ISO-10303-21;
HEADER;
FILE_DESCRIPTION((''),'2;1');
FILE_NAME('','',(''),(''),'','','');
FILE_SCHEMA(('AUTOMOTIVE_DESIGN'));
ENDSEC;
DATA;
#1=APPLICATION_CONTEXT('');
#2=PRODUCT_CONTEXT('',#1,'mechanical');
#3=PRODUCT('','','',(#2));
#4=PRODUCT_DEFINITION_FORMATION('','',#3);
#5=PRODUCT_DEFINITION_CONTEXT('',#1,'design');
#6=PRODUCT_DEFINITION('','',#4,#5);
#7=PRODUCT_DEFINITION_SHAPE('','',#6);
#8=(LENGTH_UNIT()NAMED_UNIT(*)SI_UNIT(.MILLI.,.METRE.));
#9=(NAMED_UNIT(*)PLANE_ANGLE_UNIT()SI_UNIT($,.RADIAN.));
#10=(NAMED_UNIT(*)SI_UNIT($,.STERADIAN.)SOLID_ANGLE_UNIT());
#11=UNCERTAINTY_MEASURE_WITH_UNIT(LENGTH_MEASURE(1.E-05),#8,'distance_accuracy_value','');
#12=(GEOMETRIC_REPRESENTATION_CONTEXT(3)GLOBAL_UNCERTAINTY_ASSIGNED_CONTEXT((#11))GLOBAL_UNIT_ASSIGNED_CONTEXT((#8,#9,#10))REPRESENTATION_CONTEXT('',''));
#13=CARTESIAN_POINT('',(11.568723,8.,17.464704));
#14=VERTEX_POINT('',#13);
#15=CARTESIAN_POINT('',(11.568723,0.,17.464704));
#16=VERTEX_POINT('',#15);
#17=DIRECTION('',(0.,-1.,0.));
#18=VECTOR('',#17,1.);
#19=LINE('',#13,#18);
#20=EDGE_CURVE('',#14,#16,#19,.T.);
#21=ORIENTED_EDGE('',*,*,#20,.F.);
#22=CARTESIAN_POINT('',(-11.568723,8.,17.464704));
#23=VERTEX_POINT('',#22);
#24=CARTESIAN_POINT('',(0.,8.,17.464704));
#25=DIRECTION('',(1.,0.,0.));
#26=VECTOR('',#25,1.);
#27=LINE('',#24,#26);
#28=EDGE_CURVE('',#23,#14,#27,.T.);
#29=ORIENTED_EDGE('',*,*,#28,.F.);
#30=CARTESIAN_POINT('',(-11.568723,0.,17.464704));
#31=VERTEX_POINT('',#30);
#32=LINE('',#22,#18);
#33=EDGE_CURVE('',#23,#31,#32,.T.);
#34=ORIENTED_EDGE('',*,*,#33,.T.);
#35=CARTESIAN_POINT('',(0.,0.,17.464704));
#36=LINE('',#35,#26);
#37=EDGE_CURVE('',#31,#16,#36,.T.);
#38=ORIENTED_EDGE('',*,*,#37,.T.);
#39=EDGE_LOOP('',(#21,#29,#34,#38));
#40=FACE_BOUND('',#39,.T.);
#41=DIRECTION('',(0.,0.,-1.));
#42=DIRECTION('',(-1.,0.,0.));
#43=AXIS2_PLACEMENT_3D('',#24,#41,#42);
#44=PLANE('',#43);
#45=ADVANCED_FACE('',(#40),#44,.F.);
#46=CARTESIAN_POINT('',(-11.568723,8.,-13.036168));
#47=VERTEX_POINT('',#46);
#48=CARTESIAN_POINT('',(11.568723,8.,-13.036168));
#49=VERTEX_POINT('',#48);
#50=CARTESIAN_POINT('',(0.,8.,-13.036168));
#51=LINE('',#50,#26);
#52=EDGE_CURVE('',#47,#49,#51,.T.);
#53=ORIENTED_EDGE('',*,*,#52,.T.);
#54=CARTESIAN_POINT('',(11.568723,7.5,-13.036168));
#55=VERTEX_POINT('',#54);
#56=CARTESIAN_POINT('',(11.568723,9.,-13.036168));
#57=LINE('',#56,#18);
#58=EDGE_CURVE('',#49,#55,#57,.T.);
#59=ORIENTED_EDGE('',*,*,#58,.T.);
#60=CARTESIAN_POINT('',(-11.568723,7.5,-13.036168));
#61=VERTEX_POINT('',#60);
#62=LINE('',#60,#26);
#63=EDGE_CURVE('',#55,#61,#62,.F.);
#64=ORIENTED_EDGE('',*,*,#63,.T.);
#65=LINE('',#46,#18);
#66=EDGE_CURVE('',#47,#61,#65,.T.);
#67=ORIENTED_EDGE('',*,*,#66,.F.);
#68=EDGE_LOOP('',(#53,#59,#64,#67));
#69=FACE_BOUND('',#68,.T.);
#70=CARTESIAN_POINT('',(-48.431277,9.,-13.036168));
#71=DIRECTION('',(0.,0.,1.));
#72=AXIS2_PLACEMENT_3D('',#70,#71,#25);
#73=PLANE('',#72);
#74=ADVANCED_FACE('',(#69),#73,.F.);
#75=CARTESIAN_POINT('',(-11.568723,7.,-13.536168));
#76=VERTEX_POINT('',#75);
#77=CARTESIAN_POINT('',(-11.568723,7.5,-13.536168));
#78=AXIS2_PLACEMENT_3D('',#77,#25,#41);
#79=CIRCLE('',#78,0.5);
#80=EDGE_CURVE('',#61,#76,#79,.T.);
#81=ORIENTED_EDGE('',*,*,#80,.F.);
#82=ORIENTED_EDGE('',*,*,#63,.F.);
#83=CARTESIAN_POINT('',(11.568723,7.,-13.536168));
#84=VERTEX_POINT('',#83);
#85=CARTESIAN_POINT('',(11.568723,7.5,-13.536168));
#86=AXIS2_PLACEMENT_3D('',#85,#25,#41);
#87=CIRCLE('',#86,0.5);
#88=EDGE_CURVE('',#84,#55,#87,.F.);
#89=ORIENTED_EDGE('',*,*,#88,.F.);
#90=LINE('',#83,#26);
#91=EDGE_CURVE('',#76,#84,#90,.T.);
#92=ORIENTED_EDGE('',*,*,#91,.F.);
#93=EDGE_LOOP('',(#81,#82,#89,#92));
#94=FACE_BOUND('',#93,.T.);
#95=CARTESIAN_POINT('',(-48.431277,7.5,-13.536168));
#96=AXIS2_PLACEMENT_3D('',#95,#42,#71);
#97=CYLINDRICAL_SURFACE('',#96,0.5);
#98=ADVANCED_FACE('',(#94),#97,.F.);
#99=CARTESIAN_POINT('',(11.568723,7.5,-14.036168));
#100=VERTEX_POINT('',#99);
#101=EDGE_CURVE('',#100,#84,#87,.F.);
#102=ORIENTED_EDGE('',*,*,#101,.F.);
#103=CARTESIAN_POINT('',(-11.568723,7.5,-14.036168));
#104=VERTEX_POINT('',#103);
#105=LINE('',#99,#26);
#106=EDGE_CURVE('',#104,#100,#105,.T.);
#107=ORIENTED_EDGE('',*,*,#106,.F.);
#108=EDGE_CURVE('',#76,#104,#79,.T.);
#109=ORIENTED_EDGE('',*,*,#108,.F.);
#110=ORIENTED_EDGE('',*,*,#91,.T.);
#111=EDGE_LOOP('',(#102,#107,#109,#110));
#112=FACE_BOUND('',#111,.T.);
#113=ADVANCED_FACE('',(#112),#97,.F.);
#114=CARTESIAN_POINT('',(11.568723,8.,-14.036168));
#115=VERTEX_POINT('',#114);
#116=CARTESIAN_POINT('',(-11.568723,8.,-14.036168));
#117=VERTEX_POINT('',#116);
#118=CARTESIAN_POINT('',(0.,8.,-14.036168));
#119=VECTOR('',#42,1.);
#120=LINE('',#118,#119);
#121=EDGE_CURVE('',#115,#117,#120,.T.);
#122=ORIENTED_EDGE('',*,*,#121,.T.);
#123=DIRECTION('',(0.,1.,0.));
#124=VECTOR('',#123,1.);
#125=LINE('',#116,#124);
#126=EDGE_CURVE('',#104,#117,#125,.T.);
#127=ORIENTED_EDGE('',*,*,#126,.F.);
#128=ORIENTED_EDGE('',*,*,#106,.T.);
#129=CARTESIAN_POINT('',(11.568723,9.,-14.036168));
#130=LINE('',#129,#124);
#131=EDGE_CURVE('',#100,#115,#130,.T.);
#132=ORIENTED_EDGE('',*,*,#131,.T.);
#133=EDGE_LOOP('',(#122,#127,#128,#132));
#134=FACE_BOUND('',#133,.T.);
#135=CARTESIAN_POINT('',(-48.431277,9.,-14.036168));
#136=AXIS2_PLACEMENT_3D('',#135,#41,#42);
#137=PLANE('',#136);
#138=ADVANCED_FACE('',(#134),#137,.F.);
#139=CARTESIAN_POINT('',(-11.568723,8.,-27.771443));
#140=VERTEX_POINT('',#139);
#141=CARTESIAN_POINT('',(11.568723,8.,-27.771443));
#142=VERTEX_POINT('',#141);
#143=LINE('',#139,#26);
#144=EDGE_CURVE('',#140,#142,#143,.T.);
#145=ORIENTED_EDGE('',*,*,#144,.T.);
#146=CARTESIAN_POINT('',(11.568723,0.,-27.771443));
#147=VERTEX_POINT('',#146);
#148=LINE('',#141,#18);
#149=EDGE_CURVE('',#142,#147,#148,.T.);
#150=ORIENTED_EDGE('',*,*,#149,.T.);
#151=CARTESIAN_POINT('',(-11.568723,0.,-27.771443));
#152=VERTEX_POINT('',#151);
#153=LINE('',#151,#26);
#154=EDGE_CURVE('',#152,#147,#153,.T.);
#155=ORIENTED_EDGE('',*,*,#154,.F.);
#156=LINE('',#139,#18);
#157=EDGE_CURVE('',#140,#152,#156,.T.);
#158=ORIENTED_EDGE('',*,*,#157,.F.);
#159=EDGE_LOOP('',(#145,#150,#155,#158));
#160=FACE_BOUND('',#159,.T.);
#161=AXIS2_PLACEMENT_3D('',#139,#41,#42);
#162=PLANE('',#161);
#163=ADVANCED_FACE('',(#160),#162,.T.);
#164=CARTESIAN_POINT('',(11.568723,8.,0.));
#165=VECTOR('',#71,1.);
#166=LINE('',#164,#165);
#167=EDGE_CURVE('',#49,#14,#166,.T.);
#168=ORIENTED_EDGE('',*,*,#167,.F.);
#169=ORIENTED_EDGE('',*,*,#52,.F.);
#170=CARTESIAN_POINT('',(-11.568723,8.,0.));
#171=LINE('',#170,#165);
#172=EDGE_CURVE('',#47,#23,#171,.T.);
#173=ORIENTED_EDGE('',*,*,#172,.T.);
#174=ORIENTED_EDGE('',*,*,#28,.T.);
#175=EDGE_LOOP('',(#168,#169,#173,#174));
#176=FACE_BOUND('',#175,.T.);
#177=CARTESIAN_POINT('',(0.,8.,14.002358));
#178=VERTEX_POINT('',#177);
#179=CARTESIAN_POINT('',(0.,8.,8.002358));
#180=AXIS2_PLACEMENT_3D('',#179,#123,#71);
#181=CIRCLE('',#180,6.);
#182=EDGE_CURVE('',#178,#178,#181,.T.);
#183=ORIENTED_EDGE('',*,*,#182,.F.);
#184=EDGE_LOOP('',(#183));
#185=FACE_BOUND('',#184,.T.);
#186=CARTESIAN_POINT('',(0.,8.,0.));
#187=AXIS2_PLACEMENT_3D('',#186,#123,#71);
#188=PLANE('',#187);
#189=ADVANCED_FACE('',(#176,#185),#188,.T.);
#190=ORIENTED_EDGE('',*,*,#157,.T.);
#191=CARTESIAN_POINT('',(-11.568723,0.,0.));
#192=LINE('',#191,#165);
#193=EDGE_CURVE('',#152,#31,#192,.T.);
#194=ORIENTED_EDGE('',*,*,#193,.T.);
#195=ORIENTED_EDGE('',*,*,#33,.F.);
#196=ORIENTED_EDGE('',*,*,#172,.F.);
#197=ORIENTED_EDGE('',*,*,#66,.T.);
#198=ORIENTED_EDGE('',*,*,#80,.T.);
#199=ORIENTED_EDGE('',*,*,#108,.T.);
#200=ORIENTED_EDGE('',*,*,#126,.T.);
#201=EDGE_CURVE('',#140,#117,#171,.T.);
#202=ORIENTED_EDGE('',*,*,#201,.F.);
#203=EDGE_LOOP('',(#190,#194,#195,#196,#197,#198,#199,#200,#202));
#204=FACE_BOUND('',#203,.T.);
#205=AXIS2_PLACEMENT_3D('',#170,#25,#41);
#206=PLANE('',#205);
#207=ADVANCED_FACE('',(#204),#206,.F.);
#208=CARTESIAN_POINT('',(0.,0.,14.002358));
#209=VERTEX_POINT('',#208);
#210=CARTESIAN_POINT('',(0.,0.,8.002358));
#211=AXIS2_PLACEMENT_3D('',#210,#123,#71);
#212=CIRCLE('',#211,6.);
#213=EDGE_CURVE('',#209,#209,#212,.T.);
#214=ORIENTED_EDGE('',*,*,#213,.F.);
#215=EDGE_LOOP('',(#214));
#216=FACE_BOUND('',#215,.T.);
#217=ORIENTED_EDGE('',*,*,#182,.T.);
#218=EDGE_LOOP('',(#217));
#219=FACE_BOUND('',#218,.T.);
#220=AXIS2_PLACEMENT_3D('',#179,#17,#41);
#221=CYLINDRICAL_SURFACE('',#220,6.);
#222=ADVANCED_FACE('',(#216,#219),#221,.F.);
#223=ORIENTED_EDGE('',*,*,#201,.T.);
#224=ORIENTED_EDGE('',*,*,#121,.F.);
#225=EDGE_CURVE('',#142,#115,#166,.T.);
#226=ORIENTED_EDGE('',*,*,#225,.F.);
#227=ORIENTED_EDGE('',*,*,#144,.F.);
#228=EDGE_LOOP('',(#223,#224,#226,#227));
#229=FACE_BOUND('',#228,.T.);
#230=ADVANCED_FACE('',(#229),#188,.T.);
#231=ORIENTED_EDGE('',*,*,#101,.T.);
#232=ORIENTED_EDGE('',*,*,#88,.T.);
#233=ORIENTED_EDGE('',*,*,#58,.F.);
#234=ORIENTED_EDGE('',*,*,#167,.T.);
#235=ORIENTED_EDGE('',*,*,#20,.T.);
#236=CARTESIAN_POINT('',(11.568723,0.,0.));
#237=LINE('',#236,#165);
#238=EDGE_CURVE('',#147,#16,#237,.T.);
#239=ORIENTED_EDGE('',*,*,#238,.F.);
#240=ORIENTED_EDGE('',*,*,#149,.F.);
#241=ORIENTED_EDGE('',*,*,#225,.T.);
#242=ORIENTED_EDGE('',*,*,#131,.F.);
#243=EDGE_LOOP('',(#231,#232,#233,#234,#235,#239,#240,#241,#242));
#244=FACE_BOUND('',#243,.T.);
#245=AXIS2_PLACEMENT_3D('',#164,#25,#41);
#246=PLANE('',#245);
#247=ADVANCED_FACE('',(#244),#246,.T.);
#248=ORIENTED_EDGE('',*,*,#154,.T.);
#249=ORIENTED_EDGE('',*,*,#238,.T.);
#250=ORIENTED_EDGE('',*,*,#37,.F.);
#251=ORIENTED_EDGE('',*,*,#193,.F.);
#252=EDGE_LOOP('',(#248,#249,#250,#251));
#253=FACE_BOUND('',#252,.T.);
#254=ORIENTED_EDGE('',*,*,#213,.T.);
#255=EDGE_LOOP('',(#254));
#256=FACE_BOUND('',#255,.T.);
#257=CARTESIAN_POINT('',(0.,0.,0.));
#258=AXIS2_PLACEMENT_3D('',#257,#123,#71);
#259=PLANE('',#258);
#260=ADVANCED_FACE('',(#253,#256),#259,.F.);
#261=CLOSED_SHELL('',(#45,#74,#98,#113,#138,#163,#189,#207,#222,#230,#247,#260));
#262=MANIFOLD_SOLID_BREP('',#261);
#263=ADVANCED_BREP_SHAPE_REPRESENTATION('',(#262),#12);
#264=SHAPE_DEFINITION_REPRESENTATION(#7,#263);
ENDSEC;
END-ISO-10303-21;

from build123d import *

# Parameters (mm, degrees)
BOSS_EXTRUDE1_DEPTH = 8
SKETCH2_W           = 23.137445614
SKETCH2_H           = 10.306738945
BOSS_EXTRUDE2_DEPTH = 8
SKETCH4_W           = 1
SKETCH4_H           = 2
CUT_EXTRUDE1_DEPTH  = 60
FILLET1_R           = 0.5


with BuildPart() as part:
    # Sketch1 → Boss-Extrude1 (new body)
    with BuildSketch(Plane(origin=(0, 0, 0), x_dir=(1, 0, 0), z_dir=(0, 1, 0))):
        with BuildLine():
            Line((11.568722807, -17.464704369), (11.568722807, 17.464704369))
            Line((11.568722807, 17.464704369), (0, 17.464704369))
            Line((0, 17.464704369), (0, -2.002357687))
            ThreePointArc((0, -2.002357687), (4.242640687, -3.759717), (6, -8.002357687))
            ThreePointArc((6, -8.002357687), (4.242640687, -12.244998375), (0, -14.002357687))
            Line((0, -14.002357687), (0, -17.464704369))
            Line((0, -17.464704369), (11.568722807, -17.464704369))
        make_face()
        with BuildLine():
            Line((0, -2.002357687), (0, 17.464704369))
            Line((0, 17.464704369), (-11.568722807, 17.464704369))
            Line((-11.568722807, 17.464704369), (-11.568722807, -17.464704369))
            Line((-11.568722807, -17.464704369), (0, -17.464704369))
            Line((0, -17.464704369), (0, -14.002357687))
            ThreePointArc((0, -14.002357687), (-6, -8.002357687), (0, -2.002357687))
        make_face()
    extrude(amount=BOSS_EXTRUDE1_DEPTH)

    # Sketch2 → Boss-Extrude2 (add)
    with BuildSketch(Plane.XZ):
        with Locations((0, -22.618073841)):
            Rectangle(SKETCH2_W, SKETCH2_H)
    extrude(amount=-BOSS_EXTRUDE2_DEPTH)

    # Sketch4 → Cut-Extrude1 (cut)
    with BuildSketch(Plane(origin=(11.568722807, 0, 0), x_dir=(0, 0, -1), z_dir=(1, 0, 0))):
        with Locations((13.536168456, 8)):
            Rectangle(SKETCH4_W, SKETCH4_H)
    extrude(amount=-CUT_EXTRUDE1_DEPTH, mode=Mode.SUBTRACT)

    # Fillet1
    fillet1_edges = [part.edges().sort_by_distance(p)[0] for p in [
        (0, 7, -14.036168456),
        (0, 7, -13.036168456),
    ]]
    fillet(fillet1_edges, radius=FILLET1_R - 0.0001)  # a hair under: the kernel refuses the full size


solid = part.part
